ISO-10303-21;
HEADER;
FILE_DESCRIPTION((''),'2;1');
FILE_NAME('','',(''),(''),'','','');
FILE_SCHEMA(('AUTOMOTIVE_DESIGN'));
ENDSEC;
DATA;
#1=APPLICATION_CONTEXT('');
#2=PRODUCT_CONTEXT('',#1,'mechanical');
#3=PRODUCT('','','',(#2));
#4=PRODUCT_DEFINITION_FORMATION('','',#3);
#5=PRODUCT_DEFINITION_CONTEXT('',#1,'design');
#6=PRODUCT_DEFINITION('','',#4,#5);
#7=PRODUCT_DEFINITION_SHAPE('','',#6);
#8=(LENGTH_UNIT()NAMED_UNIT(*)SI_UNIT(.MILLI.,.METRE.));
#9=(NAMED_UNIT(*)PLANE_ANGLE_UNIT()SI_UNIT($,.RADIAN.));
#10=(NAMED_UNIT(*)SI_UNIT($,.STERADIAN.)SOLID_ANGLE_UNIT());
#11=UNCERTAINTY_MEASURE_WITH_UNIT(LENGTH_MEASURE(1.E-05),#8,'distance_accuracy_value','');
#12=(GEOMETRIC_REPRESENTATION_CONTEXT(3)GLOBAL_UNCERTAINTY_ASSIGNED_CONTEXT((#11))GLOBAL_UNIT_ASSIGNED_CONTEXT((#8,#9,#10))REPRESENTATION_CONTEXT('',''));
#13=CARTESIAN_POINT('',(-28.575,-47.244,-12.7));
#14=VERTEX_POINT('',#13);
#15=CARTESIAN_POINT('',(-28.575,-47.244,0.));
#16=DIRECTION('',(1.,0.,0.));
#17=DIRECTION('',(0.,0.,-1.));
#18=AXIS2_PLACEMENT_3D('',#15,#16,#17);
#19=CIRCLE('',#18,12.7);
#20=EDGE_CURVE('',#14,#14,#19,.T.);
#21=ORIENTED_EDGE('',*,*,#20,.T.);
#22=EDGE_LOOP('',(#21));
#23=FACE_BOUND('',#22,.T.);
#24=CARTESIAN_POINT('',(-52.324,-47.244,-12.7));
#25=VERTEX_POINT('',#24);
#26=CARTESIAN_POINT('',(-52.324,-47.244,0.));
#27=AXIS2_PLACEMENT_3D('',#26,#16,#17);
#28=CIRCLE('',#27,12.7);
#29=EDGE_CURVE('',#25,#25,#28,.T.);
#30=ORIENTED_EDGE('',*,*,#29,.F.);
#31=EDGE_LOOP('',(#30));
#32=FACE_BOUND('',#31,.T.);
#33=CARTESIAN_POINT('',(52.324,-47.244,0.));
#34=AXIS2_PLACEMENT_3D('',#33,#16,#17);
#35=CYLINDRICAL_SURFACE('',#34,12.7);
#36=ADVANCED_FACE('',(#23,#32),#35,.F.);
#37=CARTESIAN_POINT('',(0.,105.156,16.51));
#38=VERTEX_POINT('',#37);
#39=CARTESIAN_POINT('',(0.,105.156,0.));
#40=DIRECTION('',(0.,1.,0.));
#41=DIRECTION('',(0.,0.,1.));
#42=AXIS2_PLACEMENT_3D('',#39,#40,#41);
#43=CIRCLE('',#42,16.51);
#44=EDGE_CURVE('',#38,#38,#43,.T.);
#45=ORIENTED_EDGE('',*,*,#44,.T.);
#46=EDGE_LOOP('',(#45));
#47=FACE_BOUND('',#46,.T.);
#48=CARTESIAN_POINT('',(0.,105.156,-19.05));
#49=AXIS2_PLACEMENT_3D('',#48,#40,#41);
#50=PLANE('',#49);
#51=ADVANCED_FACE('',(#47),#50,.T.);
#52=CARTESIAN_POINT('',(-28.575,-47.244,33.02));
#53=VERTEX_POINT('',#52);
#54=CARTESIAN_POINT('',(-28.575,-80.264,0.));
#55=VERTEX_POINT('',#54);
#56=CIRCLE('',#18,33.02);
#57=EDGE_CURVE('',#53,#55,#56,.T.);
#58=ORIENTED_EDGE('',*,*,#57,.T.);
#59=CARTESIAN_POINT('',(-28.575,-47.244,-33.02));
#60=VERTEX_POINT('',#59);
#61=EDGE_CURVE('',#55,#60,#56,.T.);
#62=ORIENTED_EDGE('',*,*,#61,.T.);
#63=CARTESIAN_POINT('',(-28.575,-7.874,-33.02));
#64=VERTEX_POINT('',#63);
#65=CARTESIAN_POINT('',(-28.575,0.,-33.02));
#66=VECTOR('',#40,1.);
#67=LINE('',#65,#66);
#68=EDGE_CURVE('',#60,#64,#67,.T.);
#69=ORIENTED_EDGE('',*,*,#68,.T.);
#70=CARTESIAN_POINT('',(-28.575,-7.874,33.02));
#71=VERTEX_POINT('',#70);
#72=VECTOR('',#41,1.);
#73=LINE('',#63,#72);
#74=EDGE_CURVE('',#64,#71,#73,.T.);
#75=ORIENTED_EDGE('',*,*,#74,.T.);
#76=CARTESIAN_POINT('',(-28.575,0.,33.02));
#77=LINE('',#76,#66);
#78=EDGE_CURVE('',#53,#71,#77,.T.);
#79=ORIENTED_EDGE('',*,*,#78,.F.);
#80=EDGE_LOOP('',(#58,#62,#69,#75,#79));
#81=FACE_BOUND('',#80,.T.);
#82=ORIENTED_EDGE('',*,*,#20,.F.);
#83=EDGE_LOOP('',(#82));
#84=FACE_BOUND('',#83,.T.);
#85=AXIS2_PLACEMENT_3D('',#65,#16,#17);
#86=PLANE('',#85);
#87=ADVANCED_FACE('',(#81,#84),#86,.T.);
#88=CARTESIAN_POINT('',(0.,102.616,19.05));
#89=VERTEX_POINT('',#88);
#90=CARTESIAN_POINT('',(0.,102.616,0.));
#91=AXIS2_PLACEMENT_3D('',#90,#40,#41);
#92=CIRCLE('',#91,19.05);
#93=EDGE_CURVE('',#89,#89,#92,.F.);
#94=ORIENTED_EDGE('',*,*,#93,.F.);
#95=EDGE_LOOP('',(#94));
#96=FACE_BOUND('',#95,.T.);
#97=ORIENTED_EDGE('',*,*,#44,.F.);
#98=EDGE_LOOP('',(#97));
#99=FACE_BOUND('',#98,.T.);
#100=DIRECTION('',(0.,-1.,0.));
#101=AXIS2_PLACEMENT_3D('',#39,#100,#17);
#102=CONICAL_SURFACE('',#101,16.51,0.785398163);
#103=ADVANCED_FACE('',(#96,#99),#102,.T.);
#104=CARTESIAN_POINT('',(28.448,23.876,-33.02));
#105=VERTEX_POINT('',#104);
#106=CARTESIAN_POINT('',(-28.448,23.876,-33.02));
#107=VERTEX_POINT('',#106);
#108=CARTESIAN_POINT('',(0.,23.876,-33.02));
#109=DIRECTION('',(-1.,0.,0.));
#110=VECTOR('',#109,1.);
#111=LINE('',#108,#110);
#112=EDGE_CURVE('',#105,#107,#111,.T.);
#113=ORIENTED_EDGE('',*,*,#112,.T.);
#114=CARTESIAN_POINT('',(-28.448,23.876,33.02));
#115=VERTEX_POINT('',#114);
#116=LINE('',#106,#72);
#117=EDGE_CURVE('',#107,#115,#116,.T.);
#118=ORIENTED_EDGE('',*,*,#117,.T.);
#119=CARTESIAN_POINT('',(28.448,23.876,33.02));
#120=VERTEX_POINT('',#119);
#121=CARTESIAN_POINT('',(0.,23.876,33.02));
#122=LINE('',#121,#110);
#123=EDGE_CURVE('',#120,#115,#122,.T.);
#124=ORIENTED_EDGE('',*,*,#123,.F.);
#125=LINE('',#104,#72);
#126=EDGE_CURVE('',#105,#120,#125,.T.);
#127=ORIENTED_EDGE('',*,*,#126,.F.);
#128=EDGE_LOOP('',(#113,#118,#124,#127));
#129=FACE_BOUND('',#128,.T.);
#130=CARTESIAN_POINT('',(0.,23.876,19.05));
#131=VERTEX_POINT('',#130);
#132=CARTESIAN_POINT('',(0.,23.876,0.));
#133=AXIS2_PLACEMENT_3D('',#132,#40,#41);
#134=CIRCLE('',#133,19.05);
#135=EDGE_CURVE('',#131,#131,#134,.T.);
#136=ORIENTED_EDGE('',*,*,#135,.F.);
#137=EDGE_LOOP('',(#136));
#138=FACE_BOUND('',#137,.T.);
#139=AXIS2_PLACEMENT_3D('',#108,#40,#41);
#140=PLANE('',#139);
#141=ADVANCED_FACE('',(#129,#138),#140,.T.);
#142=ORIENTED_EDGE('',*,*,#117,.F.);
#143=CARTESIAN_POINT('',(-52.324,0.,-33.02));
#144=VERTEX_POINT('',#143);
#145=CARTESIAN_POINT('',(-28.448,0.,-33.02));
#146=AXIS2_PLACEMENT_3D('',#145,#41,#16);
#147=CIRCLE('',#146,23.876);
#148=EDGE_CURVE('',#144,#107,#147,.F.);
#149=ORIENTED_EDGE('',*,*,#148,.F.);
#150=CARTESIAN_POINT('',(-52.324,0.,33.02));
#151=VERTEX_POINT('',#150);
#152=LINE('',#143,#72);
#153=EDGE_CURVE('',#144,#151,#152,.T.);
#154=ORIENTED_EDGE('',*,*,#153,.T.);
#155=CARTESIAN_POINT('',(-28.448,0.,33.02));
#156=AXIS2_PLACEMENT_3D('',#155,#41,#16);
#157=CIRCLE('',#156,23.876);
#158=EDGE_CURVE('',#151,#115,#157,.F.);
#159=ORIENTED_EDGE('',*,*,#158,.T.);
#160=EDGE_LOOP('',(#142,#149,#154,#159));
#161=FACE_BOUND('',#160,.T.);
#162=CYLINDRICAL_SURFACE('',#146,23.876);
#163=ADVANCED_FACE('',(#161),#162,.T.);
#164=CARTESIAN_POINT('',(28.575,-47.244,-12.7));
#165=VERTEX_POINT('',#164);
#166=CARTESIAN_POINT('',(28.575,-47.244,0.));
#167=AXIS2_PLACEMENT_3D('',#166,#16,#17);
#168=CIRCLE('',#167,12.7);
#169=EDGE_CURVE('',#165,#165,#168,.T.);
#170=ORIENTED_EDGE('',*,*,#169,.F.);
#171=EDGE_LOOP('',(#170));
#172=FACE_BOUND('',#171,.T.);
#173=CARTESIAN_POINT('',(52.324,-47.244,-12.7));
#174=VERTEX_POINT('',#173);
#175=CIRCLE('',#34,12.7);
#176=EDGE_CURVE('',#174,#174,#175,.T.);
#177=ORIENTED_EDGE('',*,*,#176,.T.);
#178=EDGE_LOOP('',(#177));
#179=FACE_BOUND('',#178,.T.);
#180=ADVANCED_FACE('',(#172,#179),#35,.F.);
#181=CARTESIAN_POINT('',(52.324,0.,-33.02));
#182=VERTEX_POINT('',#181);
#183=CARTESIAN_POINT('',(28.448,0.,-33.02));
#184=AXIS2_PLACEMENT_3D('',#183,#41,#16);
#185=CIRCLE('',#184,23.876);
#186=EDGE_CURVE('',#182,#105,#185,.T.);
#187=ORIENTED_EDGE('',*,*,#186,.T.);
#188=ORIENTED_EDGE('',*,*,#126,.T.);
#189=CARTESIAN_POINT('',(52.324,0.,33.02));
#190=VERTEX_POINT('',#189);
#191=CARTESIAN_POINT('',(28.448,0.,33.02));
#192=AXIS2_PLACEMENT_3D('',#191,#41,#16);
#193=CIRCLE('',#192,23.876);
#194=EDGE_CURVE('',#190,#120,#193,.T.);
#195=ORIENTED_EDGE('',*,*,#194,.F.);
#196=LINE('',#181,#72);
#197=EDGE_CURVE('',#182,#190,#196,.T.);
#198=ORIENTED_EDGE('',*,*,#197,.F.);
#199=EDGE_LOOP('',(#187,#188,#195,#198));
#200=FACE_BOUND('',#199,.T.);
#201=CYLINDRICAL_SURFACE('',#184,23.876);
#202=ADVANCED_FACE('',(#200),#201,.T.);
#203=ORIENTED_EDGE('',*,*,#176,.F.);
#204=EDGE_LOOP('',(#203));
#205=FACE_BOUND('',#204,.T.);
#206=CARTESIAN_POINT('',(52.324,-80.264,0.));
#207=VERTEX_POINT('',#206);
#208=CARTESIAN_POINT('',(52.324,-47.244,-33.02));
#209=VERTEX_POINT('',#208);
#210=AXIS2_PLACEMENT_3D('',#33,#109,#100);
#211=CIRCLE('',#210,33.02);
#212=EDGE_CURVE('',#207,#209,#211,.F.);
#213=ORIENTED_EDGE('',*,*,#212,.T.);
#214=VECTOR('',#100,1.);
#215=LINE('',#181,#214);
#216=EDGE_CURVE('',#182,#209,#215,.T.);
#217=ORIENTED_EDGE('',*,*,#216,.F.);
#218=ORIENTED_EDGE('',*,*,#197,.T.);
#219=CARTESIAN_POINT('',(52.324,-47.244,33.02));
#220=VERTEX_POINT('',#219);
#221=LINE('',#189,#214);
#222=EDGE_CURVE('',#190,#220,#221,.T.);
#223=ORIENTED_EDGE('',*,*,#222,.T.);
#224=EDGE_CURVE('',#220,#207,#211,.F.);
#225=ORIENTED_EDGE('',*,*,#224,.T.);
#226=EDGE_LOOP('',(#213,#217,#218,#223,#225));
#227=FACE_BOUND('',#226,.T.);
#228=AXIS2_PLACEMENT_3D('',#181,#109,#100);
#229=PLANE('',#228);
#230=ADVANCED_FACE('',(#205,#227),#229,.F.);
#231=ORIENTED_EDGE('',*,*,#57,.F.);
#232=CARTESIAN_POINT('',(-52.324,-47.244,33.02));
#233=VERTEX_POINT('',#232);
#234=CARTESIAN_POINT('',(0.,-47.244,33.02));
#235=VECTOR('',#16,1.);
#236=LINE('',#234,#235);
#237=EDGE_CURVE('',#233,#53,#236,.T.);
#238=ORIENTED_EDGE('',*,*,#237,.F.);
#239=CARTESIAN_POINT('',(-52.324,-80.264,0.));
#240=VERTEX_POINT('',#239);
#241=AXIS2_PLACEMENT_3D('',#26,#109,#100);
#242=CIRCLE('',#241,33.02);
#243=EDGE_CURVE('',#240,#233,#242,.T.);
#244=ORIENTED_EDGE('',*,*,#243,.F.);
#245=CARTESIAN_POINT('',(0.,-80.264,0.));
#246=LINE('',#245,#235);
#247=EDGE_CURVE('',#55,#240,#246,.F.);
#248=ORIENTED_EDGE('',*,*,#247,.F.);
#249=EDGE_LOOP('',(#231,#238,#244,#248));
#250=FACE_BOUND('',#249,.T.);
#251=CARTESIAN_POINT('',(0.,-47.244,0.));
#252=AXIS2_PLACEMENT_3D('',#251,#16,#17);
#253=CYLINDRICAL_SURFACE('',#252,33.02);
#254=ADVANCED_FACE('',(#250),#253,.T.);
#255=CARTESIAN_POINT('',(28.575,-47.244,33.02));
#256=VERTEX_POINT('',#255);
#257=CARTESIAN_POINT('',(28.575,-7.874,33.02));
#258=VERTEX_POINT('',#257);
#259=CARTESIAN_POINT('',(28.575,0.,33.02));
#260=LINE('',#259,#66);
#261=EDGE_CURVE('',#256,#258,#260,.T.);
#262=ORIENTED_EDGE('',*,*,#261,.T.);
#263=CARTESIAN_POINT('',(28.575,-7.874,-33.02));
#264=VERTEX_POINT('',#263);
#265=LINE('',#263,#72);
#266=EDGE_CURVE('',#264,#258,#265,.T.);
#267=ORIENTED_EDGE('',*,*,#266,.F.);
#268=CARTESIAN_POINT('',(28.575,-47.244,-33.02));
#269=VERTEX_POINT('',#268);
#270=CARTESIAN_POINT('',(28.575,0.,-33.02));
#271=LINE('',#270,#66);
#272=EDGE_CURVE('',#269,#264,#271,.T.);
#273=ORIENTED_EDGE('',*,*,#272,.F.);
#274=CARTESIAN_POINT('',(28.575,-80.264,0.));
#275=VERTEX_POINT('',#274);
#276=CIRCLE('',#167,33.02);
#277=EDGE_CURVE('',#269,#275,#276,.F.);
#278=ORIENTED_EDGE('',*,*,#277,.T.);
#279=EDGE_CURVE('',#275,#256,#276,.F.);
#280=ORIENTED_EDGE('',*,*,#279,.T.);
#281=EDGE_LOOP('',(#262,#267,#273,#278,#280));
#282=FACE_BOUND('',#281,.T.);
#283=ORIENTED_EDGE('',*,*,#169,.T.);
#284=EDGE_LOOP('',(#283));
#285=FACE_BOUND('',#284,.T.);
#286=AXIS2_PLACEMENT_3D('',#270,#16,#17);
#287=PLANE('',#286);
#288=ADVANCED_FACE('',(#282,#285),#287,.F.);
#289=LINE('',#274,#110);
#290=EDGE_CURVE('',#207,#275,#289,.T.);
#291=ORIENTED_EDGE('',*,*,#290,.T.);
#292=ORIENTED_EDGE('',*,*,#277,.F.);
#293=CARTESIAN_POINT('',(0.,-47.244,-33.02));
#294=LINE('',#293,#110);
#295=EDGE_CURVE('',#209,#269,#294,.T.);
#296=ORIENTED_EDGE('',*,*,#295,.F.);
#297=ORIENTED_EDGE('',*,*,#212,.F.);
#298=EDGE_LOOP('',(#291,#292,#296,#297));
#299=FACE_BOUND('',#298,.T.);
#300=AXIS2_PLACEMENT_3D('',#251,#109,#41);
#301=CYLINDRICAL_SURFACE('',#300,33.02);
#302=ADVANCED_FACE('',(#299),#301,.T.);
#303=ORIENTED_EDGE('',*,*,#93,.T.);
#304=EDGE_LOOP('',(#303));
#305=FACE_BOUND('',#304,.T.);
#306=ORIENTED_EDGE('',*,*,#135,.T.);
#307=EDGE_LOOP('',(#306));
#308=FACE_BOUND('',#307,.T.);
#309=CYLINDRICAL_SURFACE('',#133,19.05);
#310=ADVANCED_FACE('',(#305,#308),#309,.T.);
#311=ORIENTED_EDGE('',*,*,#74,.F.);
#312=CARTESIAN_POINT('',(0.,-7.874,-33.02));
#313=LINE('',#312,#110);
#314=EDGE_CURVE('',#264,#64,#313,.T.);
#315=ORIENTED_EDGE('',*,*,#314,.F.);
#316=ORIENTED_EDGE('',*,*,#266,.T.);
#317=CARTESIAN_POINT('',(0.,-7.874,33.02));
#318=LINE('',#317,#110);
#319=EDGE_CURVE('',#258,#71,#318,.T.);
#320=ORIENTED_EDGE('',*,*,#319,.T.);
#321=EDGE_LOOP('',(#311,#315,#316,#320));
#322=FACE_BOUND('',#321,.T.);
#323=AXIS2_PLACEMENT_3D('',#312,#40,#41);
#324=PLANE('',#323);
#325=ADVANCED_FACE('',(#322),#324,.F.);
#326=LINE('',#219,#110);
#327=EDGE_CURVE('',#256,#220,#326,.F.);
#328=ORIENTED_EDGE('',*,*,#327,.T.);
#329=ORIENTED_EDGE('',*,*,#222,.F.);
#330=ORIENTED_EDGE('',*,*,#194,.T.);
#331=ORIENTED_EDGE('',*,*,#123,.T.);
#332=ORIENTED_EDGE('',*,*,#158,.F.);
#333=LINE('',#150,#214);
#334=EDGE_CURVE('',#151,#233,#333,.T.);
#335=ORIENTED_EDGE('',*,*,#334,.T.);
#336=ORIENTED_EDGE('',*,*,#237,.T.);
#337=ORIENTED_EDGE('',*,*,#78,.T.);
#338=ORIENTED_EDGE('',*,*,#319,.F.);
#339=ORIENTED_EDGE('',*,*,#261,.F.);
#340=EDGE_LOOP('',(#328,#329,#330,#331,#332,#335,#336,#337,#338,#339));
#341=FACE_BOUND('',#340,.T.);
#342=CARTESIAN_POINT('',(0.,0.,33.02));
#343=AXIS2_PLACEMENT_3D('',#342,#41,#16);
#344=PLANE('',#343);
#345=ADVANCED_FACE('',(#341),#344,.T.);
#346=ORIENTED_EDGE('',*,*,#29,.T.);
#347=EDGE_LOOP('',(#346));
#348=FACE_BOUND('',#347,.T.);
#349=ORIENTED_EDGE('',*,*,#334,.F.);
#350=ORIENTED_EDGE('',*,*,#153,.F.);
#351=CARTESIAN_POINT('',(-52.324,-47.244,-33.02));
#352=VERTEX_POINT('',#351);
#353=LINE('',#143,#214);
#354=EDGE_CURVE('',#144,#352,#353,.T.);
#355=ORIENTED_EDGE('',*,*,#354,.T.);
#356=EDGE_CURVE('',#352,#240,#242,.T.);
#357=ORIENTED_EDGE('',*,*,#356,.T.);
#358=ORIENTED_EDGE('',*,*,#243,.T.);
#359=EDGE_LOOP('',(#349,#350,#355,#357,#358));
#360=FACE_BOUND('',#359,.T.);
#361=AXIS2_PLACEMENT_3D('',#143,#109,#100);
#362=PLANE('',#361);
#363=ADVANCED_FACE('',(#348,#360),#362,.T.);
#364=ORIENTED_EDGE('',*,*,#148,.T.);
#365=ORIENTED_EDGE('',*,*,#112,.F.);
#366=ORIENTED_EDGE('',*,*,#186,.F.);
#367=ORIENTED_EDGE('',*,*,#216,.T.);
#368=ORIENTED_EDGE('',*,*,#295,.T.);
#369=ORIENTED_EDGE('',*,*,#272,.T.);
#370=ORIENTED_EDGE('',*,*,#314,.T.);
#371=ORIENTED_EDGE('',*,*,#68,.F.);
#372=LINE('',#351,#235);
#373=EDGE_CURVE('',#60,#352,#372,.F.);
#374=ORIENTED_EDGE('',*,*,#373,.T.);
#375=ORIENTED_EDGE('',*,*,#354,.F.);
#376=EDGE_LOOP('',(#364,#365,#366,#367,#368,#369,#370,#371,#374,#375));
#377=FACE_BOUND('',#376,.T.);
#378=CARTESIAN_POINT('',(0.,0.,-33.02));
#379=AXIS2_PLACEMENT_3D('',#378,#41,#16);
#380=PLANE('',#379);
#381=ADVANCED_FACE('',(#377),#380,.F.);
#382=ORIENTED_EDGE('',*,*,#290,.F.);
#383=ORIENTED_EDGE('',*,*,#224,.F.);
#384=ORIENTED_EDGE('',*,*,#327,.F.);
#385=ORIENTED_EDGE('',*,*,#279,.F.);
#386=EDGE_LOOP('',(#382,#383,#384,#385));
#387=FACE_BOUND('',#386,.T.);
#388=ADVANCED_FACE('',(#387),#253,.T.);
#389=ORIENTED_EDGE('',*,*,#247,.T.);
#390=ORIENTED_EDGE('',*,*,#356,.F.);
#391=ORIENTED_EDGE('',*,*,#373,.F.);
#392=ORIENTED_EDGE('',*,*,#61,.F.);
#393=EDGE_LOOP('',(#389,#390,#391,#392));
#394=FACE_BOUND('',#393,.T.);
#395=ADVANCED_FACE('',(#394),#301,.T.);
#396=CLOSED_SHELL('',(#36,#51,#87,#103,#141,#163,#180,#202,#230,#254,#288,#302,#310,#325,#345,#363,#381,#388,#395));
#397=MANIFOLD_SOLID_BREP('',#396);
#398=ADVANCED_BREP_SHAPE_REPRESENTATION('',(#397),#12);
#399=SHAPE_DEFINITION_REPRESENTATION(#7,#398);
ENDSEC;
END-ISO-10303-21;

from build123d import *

# Parameters (mm, degrees)
BOSS_EXTRUDE1_DEPTH      = 33.02
BOSS_EXTRUDE1_DEPTH_BACK = 33.02
BOSS_EXTRUDE3_DEPTH      = 19.05
BOSS_EXTRUDE3_DEPTH_BACK = 19.05
SKETCH2_6_W              = 38.1
SKETCH2_6_H              = 81.28
SKETCH8_OUTSIDE_W        = 151.232
SKETCH8_OUTSIDE_H        = 112.624
SKETCH8_OUTSIDE_R        = 19.05
CUT_EXTRUDE1_DEPTH       = 81.28
CHAMFER2_SIZE            = 2.54
FILLET2_R                = 33.02
HOLE1_D                  = 25.4


with BuildPart() as part:
    # Sketch2 → Boss-Extrude1 (new, two sides: drawn at the far end of the back side and taken through both)
    with BuildSketch(Plane.XY.offset(-BOSS_EXTRUDE1_DEPTH_BACK)):
        with BuildLine():
            ThreePointArc((-52.324, 0), (-45.330881508, 16.882881508), (-28.448, 23.876))
            Line((-28.448, 23.876), (28.448, 23.876))
            ThreePointArc((28.448, 23.876), (45.330881508, 16.882881508), (52.324, 0))
            Line((52.324, 0), (52.324, -80.264))
            Line((52.324, -80.264), (28.575, -80.264))
            Line((28.575, -80.264), (28.575, -7.874))
            Line((28.575, -7.874), (-28.575, -7.874))
            Line((-28.575, -7.874), (-28.575, -80.264))
            Line((-28.575, -80.264), (-52.324, -80.264))
            Line((-52.324, -80.264), (-52.324, 0))
        make_face()
    extrude(amount=BOSS_EXTRUDE1_DEPTH + BOSS_EXTRUDE1_DEPTH_BACK)

    # Sketch2<6> → Boss-Extrude3 (add, two sides: drawn at the far end of the back side and taken through both)
    with BuildSketch(Plane.XY.offset(-BOSS_EXTRUDE3_DEPTH_BACK)):
        with Locations((0, 64.516)):
            Rectangle(SKETCH2_6_W, SKETCH2_6_H)
    extrude(amount=BOSS_EXTRUDE3_DEPTH + BOSS_EXTRUDE3_DEPTH_BACK)

    # Sketch8 outside → Cut-Extrude1 (cut)
    with BuildSketch(Plane(origin=(0, 105.156, 0), x_dir=(1, 0, 0), z_dir=(0, 1, 0))):
        Rectangle(SKETCH8_OUTSIDE_W, SKETCH8_OUTSIDE_H)
        with Locations(Location((0, 0, 0), (0, 0, 270))):
            Circle(SKETCH8_OUTSIDE_R, mode=Mode.SUBTRACT)
    extrude(amount=-CUT_EXTRUDE1_DEPTH, mode=Mode.SUBTRACT)

    # Chamfer2
    chamfer2_edges = [part.edges().sort_by_distance(p)[0] for p in [
        (0, 105.156, -19.05),
    ]]
    chamfer(chamfer2_edges, length=CHAMFER2_SIZE)

    # Fillet2
    fillet2_edges = [part.edges().sort_by_distance(p)[0] for p in [
        (-40.4495, -80.264, -33.02),
        (40.4495, -80.264, -33.02),
        (40.4495, -80.264, 33.02),
        (-40.4495, -80.264, 33.02),
    ]]
    fillet(fillet2_edges, radius=FILLET2_R - 0.0001)  # a hair under: the kernel refuses the full size

    # Hole1 (through all)
    with Locations(Plane(origin=(52.324, 0, 0), x_dir=(0, 0, -1), z_dir=(1, 0, 0))):
        with Locations((0, -47.244)):
            Hole(HOLE1_D / 2)


solid = part.part
